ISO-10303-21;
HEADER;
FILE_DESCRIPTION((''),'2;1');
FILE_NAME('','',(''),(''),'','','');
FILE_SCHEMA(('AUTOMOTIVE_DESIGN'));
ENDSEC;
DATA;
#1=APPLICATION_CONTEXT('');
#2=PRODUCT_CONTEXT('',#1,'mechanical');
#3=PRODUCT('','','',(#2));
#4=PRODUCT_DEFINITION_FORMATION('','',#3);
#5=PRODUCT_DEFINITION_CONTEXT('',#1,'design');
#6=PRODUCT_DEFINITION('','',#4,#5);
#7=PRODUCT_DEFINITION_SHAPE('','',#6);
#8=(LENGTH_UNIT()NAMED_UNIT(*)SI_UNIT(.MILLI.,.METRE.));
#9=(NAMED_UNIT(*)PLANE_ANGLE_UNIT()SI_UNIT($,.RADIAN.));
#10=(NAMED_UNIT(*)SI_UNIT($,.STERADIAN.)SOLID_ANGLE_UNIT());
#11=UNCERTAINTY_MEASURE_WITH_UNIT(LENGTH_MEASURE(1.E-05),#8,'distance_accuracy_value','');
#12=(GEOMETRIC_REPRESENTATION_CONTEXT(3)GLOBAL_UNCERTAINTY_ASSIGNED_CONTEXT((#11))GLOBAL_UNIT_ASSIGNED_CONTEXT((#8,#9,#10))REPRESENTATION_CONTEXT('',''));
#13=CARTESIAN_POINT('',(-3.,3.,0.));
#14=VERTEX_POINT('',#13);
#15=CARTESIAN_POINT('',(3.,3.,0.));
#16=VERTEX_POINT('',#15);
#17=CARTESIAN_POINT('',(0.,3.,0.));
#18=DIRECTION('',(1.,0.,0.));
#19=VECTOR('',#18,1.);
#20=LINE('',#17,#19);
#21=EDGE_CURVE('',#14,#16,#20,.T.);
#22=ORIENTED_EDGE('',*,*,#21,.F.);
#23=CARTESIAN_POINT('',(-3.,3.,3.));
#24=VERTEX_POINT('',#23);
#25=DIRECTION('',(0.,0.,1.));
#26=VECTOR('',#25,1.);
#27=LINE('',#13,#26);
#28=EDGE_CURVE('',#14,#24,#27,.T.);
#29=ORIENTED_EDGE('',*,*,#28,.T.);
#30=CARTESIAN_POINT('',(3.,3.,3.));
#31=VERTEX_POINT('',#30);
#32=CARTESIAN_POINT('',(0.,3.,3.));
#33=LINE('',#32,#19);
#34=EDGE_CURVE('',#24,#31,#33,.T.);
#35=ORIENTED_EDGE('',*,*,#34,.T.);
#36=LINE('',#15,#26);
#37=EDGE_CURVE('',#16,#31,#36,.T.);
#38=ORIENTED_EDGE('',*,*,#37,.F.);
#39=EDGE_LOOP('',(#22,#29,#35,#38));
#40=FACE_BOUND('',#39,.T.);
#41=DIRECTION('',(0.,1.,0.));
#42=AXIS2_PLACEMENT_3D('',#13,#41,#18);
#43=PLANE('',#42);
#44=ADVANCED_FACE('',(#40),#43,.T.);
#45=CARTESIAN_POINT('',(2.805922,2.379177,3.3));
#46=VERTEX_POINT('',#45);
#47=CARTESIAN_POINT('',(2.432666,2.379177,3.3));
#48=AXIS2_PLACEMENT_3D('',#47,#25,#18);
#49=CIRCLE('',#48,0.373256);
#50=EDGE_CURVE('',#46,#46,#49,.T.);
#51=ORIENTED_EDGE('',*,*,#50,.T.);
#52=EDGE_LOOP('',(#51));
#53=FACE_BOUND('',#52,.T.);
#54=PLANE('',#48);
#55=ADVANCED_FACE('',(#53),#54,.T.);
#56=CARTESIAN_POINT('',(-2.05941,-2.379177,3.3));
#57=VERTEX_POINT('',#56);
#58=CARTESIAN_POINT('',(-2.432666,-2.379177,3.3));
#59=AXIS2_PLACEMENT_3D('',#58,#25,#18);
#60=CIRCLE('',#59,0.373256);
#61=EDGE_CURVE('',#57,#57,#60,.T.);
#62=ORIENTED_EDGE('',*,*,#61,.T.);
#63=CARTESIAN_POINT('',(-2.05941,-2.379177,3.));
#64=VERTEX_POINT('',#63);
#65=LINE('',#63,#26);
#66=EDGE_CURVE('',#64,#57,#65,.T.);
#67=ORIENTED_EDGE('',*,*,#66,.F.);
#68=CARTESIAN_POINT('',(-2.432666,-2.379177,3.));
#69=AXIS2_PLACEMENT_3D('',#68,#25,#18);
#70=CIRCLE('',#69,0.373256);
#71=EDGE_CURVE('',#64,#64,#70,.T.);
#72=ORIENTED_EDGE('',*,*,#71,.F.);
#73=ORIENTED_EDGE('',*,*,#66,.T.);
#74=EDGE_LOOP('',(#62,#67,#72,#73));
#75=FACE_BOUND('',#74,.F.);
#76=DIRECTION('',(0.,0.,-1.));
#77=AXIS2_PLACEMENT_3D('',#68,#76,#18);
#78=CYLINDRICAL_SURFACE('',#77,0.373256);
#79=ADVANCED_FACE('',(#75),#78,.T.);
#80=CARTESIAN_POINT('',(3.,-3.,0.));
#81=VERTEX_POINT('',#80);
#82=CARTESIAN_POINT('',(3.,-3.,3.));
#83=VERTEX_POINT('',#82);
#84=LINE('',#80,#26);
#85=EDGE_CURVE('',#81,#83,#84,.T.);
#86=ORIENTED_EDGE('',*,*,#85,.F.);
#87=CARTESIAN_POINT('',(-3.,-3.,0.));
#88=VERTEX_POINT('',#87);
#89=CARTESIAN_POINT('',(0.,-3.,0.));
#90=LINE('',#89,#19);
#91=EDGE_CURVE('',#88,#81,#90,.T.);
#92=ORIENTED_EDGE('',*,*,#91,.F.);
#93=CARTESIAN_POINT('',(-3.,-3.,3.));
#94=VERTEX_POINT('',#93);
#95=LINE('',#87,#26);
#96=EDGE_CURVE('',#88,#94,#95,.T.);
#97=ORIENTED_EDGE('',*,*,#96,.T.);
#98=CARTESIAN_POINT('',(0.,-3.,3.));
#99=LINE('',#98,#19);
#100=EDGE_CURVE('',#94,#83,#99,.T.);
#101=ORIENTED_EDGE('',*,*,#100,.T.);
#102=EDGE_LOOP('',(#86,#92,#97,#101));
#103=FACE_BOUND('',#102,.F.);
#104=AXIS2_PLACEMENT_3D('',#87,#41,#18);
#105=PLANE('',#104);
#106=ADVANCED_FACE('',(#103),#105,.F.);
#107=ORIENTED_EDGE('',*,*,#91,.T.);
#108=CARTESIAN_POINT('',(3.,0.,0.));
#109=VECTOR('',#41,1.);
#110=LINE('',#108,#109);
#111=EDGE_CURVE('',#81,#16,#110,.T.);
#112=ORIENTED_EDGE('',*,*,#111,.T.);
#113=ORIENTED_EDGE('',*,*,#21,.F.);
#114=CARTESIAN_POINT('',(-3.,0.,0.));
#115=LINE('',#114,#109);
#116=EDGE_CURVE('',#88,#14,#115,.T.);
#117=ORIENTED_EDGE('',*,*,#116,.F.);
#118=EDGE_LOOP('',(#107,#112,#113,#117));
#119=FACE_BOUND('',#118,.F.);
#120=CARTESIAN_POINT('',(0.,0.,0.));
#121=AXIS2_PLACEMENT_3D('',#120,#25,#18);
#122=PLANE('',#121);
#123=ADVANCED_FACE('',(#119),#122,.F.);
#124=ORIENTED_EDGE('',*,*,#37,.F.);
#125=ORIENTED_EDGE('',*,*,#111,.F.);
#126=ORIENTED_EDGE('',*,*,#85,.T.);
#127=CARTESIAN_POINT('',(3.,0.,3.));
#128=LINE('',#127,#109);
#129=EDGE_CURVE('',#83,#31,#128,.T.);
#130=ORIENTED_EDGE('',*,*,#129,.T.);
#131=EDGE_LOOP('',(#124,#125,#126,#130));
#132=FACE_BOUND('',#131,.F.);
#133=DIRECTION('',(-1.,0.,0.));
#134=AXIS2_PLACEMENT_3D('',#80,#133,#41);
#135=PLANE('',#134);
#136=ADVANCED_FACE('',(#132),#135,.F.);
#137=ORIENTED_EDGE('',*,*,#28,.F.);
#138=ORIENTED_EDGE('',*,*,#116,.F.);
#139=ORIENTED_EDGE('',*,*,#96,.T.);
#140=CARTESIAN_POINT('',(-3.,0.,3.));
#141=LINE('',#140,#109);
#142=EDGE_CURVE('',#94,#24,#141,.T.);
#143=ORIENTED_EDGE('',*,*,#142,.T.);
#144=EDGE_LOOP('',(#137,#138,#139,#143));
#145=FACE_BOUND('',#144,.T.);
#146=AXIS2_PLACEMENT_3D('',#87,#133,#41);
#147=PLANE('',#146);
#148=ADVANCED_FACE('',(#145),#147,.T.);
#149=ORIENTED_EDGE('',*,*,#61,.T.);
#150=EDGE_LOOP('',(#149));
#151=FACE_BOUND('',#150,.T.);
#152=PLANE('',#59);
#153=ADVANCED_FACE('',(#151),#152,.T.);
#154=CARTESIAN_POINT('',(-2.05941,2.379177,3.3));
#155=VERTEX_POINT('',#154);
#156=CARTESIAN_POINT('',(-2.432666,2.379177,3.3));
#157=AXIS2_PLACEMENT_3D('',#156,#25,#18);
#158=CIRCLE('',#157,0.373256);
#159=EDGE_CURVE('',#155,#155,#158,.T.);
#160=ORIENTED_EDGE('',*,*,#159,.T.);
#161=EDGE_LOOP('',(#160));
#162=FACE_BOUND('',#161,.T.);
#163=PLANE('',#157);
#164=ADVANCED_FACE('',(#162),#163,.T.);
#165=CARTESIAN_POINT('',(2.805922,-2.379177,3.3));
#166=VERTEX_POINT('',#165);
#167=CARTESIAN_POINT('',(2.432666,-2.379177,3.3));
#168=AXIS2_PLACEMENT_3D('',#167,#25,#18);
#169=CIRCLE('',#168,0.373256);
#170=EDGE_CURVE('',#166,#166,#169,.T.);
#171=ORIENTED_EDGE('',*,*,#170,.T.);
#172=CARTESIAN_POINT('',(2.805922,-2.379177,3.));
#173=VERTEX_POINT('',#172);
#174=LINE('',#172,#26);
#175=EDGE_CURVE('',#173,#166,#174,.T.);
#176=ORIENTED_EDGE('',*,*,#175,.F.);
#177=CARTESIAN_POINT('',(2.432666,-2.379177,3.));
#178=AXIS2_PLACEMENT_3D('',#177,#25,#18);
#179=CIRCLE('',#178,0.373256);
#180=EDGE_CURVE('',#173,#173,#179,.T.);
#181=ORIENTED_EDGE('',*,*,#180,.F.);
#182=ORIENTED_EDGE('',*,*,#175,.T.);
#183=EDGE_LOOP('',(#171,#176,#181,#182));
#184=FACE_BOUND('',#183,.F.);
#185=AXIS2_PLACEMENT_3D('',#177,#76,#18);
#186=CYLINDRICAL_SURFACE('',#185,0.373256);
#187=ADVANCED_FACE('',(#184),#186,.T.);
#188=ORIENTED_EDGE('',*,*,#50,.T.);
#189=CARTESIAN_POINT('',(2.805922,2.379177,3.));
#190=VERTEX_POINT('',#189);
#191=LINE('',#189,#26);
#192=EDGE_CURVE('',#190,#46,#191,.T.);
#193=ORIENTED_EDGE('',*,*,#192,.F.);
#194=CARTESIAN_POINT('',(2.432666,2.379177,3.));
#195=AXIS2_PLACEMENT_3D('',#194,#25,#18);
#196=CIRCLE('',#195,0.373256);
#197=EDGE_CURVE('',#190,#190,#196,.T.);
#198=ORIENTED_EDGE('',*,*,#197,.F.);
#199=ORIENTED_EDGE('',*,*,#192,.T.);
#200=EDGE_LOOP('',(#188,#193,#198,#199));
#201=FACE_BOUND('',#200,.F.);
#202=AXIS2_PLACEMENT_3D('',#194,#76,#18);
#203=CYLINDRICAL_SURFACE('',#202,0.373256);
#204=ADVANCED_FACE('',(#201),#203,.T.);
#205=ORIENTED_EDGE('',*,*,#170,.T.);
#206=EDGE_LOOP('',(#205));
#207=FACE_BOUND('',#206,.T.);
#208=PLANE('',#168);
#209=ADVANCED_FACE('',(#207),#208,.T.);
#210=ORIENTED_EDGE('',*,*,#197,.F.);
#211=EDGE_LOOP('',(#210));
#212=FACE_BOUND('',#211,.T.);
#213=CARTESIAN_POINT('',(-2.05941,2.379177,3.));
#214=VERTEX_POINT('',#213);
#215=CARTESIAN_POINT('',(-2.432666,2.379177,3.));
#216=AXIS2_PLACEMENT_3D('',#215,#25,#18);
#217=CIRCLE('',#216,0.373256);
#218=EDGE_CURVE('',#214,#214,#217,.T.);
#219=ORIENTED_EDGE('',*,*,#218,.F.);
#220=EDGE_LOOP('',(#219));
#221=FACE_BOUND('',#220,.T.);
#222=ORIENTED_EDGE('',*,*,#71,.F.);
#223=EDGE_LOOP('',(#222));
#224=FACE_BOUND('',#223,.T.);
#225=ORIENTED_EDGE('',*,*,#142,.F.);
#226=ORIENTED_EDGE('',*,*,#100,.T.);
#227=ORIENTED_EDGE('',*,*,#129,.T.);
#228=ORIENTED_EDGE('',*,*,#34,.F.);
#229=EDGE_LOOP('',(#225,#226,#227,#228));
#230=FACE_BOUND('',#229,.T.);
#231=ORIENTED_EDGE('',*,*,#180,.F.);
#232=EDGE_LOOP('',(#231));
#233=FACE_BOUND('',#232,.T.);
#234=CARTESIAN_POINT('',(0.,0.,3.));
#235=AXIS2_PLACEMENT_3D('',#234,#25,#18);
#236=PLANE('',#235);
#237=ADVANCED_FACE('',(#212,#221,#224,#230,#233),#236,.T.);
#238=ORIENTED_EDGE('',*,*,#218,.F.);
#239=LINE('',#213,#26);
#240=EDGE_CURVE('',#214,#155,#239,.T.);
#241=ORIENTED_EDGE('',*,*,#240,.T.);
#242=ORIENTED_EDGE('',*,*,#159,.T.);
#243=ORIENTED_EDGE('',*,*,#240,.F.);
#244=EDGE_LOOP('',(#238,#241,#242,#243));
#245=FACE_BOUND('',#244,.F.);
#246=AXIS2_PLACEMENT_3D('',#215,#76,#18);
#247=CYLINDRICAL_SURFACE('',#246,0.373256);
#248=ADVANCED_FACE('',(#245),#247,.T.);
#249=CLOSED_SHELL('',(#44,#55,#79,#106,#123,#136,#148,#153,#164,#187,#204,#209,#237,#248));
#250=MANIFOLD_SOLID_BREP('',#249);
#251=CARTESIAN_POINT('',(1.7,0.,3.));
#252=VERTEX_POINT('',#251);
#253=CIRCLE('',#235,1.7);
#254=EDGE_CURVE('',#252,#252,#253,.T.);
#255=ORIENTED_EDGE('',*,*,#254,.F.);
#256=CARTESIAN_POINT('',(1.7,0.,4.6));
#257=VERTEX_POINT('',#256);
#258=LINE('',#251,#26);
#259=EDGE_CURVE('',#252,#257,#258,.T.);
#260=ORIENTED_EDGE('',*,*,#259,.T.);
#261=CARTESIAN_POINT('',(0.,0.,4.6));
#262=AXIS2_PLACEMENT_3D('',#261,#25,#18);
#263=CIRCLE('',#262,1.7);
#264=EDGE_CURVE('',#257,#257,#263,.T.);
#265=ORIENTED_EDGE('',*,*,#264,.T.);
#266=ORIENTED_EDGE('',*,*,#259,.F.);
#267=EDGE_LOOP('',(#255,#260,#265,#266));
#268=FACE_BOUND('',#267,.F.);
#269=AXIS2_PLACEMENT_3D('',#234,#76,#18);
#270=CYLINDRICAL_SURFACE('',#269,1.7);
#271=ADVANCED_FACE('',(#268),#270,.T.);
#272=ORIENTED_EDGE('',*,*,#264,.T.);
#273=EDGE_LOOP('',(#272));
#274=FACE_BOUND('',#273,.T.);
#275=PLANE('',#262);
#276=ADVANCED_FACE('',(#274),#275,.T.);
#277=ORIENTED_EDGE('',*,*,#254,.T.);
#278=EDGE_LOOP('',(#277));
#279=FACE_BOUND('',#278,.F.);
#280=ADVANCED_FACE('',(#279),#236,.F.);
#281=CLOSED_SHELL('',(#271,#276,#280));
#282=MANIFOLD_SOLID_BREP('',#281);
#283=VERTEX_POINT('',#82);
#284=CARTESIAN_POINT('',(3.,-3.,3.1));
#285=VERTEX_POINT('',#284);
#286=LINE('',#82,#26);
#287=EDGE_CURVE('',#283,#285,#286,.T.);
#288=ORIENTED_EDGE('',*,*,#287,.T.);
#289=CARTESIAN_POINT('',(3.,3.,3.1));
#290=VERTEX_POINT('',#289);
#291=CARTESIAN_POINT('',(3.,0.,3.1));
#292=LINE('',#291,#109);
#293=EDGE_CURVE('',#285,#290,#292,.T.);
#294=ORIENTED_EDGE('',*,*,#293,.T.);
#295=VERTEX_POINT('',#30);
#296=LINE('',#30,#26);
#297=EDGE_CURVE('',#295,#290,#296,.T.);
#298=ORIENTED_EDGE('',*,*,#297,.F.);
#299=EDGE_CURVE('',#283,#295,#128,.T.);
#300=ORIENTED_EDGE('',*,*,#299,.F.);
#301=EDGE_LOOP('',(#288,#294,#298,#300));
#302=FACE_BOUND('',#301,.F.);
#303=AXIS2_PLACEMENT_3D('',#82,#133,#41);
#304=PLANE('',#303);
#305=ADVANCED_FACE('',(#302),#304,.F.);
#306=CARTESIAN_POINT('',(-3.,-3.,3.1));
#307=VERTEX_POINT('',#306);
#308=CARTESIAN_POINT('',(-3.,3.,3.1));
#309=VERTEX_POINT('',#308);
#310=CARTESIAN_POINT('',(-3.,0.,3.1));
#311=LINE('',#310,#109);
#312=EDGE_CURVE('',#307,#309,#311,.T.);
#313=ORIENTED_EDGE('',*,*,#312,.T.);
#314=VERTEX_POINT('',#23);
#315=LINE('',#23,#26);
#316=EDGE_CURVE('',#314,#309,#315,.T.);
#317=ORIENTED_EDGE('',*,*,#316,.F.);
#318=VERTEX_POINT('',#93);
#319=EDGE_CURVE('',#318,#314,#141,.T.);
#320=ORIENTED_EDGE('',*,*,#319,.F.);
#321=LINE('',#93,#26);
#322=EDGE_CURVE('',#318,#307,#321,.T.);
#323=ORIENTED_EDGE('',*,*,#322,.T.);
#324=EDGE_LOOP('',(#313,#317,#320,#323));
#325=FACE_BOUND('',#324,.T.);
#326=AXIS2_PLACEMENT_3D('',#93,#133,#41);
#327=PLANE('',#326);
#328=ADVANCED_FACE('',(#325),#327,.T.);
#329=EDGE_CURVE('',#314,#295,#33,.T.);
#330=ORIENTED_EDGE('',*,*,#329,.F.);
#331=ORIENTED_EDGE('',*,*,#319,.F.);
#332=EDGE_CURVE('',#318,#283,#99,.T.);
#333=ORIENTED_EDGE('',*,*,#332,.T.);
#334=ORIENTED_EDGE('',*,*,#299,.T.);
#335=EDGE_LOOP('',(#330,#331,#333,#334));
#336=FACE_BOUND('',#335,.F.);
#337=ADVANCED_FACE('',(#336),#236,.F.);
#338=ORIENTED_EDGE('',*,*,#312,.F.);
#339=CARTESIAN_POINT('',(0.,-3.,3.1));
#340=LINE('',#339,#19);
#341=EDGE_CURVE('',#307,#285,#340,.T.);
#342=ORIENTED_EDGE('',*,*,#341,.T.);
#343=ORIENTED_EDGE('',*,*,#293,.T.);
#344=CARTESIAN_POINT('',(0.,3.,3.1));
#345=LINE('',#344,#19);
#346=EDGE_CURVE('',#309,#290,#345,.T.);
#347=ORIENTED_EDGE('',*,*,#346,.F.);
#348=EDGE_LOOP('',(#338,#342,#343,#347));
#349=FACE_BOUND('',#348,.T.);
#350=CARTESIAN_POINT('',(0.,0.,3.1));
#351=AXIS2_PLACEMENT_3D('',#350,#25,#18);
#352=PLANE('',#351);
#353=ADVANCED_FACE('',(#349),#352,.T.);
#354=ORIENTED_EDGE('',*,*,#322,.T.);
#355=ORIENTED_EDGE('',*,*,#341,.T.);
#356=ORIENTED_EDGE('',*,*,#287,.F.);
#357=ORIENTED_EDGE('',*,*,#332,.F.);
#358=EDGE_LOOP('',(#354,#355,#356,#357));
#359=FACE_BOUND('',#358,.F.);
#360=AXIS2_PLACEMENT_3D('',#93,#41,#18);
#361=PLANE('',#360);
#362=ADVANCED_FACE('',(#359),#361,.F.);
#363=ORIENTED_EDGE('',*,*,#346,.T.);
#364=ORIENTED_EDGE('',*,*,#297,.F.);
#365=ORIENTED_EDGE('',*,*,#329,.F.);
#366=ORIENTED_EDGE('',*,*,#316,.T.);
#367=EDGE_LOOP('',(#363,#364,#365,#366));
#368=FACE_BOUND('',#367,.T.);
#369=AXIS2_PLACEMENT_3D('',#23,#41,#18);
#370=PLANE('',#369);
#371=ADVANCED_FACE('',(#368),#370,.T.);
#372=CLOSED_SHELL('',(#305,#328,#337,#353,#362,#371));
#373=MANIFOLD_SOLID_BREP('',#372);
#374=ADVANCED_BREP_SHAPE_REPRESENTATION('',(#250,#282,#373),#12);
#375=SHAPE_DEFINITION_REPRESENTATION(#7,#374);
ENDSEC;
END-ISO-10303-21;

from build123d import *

# Parameters (mm, degrees)
F0_W     = 6
F0_H     = 6
F1_DEPTH = 3
F2_R     = 1.7
F3_DEPTH = 1.6
F4_DEPTH = 0.1
F2_R_2   = 0.3732558786
F5_DEPTH = 0.3


with BuildPart() as f1:
    # F0 (on Top) → F1 (new body)
    with BuildSketch(Plane.XY):
        Rectangle(F0_W, F0_H)
    extrude(amount=F1_DEPTH)


with BuildPart() as f3:
    # F2 (on face) → F3 (new body)
    with BuildSketch(Plane.XY.offset(3)):
        Circle(F2_R)
    extrude(amount=F3_DEPTH)


with BuildPart() as f4:
    # F4 (new): a face of the model
    f4_faces = [f1.part.faces().sort_by_distance(p)[0] for p in [
        (0, 0, 3),
    ]]
    extrude(f4_faces, amount=F4_DEPTH)


with BuildPart() as f1_1:
    add(f1.part)

    # F2 (on face) → F5 (join)
    with BuildSketch(Plane.XY.offset(3)):
        with Locations((-2.4326657876, -2.379177371)):
            Circle(F2_R_2)
        with Locations((2.4326657876, -2.379177371)):
            Circle(F2_R_2)
        with Locations((2.4326657876, 2.379177371)):
            Circle(F2_R_2)
        with Locations((-2.4326657876, 2.379177371)):
            Circle(F2_R_2)
    extrude(amount=F5_DEPTH)


solid = Compound([f3.part, f4.part, f1_1.part])
